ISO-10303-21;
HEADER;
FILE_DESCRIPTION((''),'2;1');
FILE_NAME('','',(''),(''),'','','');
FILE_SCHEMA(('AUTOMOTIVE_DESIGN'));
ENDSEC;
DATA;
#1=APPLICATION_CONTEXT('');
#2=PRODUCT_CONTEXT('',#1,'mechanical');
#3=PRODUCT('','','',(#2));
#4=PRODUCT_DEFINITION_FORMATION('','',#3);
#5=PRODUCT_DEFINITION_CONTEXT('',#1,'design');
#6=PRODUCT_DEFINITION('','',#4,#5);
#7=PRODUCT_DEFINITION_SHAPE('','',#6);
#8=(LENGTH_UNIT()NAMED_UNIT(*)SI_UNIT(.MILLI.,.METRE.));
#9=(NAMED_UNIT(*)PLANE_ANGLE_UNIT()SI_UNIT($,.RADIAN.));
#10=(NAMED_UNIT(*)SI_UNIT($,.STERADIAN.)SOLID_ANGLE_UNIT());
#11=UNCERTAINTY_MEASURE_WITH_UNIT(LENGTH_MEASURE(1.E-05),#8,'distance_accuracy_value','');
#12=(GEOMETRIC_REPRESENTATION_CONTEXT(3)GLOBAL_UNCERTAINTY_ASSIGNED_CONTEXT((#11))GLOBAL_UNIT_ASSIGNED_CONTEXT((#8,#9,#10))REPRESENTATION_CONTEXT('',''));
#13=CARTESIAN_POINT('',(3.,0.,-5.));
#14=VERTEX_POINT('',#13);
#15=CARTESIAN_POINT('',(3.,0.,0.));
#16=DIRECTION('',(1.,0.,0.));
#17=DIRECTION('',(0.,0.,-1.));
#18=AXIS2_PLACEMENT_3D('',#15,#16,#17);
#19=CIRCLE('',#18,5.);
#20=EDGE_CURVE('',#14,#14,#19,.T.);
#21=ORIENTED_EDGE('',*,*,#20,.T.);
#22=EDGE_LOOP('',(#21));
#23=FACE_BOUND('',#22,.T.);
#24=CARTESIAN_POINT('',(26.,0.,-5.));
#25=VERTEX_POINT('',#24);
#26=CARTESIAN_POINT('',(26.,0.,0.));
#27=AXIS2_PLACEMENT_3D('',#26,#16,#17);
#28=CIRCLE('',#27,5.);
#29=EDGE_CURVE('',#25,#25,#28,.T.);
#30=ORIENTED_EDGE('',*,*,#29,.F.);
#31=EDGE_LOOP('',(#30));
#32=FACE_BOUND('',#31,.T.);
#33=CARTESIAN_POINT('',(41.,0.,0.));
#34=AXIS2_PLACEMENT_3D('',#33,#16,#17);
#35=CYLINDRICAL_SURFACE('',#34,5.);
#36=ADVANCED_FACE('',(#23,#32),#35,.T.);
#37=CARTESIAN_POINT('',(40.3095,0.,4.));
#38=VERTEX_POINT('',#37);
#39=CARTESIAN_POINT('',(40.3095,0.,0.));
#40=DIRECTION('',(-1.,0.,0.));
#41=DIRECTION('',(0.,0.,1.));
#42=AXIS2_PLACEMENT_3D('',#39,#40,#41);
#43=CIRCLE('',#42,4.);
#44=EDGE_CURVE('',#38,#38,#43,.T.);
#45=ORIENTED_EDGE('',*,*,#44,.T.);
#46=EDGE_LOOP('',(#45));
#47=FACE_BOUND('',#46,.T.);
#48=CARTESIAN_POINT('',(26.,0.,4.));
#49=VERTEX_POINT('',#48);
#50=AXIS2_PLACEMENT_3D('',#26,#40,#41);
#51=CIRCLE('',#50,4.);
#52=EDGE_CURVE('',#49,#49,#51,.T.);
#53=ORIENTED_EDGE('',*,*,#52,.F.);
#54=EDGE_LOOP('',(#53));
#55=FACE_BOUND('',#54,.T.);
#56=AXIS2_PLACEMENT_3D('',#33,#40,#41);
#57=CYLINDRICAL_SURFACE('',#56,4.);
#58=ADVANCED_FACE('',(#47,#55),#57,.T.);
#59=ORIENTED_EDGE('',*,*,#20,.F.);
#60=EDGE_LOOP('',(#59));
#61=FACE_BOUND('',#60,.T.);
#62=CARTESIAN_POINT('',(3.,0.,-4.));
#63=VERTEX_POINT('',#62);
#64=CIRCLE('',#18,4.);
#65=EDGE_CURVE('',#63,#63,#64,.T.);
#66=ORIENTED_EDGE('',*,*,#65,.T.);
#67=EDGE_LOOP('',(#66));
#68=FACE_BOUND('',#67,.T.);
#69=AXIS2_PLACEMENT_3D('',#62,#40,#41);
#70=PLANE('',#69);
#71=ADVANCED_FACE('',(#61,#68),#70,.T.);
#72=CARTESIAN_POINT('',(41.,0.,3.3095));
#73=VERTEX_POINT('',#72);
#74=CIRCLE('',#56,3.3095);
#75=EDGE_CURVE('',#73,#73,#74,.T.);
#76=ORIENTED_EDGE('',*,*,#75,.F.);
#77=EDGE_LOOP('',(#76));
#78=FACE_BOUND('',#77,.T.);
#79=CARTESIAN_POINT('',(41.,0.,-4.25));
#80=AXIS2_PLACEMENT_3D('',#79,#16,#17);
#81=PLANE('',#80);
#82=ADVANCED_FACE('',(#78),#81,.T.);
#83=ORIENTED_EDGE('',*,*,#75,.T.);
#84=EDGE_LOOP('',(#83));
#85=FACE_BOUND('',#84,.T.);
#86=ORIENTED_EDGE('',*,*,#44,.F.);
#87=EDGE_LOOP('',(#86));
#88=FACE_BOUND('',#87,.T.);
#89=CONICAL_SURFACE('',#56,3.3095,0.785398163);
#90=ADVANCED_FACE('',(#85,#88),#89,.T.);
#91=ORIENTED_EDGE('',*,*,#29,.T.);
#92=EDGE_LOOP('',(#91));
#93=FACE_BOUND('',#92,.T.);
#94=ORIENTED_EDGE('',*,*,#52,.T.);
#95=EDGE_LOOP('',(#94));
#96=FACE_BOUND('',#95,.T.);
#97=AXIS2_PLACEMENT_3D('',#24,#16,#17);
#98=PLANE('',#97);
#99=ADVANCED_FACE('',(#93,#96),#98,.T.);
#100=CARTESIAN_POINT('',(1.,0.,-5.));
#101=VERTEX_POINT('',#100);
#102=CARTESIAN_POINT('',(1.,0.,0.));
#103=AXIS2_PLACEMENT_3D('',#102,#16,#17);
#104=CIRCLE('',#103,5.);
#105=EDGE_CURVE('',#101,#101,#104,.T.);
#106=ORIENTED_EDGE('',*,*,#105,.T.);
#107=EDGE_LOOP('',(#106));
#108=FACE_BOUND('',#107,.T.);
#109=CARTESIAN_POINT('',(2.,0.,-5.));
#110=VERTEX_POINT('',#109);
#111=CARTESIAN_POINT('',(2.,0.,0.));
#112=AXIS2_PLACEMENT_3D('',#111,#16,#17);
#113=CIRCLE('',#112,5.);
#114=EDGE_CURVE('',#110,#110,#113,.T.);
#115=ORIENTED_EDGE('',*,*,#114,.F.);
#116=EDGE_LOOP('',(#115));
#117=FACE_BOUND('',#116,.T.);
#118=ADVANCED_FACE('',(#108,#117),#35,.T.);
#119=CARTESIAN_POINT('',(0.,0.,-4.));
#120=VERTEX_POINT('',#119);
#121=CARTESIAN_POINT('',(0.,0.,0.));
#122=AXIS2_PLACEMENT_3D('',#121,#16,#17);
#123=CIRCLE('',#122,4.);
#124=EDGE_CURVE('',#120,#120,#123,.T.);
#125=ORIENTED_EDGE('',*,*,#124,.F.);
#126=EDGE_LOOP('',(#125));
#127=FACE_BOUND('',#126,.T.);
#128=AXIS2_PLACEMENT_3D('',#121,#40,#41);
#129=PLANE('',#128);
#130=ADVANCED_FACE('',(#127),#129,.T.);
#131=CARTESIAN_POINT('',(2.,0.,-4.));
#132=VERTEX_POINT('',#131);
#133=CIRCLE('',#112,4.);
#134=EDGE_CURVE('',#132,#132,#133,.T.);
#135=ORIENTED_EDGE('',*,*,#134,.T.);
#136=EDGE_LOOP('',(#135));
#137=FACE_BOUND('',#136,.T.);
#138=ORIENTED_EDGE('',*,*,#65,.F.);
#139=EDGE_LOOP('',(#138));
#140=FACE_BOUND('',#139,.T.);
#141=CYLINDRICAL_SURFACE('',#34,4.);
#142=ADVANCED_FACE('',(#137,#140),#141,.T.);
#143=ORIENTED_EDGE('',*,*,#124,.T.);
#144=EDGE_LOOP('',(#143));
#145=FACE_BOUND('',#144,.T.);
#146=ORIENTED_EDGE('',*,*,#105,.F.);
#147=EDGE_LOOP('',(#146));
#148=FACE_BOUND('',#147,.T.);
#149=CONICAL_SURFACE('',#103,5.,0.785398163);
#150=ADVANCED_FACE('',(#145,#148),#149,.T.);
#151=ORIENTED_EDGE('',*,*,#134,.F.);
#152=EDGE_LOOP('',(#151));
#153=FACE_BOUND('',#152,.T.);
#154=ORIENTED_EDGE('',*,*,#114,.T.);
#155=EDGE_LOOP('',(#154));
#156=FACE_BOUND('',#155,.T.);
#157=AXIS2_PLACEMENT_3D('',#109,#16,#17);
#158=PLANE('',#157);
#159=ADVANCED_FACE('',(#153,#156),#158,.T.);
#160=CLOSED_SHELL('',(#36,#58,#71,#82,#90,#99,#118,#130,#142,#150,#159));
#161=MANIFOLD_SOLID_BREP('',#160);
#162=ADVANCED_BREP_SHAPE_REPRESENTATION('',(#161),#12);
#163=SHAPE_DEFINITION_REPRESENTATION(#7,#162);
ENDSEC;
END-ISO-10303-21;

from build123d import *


# Read off the part's stored shape, not the designer's step: M8 Machine Threads Stud1
with BuildPart() as part:
    # Sketch1 → Revolve1 (revolve)
    with BuildSketch(Plane(origin=(0, 0, 0), x_dir=(1, 0, 0), z_dir=(0, 1, 0))):
        Polygon((0, 0), (0, 4), (1, 5), (2, 5), (2, 4), (3, 4), (3, 5), (26, 5), (26, 4.25), (41, 4.25), (41, 0), align=None)
    revolve(axis=Axis((41, 0, 0), (-1, 0, 0)))

    # M8 Machine Threads Stud1 outline → M8 Machine Threads Stud1 (revolve, cut)
    with BuildSketch(Plane.YX):
        Polygon((4.25, 41), (3.3095, 41), (4, 40.3095), (4, 26), (4.25, 26), align=None)
    revolve(axis=Axis((0, 0, 0), (1, 0, 0)), mode=Mode.SUBTRACT)


solid = part.part
